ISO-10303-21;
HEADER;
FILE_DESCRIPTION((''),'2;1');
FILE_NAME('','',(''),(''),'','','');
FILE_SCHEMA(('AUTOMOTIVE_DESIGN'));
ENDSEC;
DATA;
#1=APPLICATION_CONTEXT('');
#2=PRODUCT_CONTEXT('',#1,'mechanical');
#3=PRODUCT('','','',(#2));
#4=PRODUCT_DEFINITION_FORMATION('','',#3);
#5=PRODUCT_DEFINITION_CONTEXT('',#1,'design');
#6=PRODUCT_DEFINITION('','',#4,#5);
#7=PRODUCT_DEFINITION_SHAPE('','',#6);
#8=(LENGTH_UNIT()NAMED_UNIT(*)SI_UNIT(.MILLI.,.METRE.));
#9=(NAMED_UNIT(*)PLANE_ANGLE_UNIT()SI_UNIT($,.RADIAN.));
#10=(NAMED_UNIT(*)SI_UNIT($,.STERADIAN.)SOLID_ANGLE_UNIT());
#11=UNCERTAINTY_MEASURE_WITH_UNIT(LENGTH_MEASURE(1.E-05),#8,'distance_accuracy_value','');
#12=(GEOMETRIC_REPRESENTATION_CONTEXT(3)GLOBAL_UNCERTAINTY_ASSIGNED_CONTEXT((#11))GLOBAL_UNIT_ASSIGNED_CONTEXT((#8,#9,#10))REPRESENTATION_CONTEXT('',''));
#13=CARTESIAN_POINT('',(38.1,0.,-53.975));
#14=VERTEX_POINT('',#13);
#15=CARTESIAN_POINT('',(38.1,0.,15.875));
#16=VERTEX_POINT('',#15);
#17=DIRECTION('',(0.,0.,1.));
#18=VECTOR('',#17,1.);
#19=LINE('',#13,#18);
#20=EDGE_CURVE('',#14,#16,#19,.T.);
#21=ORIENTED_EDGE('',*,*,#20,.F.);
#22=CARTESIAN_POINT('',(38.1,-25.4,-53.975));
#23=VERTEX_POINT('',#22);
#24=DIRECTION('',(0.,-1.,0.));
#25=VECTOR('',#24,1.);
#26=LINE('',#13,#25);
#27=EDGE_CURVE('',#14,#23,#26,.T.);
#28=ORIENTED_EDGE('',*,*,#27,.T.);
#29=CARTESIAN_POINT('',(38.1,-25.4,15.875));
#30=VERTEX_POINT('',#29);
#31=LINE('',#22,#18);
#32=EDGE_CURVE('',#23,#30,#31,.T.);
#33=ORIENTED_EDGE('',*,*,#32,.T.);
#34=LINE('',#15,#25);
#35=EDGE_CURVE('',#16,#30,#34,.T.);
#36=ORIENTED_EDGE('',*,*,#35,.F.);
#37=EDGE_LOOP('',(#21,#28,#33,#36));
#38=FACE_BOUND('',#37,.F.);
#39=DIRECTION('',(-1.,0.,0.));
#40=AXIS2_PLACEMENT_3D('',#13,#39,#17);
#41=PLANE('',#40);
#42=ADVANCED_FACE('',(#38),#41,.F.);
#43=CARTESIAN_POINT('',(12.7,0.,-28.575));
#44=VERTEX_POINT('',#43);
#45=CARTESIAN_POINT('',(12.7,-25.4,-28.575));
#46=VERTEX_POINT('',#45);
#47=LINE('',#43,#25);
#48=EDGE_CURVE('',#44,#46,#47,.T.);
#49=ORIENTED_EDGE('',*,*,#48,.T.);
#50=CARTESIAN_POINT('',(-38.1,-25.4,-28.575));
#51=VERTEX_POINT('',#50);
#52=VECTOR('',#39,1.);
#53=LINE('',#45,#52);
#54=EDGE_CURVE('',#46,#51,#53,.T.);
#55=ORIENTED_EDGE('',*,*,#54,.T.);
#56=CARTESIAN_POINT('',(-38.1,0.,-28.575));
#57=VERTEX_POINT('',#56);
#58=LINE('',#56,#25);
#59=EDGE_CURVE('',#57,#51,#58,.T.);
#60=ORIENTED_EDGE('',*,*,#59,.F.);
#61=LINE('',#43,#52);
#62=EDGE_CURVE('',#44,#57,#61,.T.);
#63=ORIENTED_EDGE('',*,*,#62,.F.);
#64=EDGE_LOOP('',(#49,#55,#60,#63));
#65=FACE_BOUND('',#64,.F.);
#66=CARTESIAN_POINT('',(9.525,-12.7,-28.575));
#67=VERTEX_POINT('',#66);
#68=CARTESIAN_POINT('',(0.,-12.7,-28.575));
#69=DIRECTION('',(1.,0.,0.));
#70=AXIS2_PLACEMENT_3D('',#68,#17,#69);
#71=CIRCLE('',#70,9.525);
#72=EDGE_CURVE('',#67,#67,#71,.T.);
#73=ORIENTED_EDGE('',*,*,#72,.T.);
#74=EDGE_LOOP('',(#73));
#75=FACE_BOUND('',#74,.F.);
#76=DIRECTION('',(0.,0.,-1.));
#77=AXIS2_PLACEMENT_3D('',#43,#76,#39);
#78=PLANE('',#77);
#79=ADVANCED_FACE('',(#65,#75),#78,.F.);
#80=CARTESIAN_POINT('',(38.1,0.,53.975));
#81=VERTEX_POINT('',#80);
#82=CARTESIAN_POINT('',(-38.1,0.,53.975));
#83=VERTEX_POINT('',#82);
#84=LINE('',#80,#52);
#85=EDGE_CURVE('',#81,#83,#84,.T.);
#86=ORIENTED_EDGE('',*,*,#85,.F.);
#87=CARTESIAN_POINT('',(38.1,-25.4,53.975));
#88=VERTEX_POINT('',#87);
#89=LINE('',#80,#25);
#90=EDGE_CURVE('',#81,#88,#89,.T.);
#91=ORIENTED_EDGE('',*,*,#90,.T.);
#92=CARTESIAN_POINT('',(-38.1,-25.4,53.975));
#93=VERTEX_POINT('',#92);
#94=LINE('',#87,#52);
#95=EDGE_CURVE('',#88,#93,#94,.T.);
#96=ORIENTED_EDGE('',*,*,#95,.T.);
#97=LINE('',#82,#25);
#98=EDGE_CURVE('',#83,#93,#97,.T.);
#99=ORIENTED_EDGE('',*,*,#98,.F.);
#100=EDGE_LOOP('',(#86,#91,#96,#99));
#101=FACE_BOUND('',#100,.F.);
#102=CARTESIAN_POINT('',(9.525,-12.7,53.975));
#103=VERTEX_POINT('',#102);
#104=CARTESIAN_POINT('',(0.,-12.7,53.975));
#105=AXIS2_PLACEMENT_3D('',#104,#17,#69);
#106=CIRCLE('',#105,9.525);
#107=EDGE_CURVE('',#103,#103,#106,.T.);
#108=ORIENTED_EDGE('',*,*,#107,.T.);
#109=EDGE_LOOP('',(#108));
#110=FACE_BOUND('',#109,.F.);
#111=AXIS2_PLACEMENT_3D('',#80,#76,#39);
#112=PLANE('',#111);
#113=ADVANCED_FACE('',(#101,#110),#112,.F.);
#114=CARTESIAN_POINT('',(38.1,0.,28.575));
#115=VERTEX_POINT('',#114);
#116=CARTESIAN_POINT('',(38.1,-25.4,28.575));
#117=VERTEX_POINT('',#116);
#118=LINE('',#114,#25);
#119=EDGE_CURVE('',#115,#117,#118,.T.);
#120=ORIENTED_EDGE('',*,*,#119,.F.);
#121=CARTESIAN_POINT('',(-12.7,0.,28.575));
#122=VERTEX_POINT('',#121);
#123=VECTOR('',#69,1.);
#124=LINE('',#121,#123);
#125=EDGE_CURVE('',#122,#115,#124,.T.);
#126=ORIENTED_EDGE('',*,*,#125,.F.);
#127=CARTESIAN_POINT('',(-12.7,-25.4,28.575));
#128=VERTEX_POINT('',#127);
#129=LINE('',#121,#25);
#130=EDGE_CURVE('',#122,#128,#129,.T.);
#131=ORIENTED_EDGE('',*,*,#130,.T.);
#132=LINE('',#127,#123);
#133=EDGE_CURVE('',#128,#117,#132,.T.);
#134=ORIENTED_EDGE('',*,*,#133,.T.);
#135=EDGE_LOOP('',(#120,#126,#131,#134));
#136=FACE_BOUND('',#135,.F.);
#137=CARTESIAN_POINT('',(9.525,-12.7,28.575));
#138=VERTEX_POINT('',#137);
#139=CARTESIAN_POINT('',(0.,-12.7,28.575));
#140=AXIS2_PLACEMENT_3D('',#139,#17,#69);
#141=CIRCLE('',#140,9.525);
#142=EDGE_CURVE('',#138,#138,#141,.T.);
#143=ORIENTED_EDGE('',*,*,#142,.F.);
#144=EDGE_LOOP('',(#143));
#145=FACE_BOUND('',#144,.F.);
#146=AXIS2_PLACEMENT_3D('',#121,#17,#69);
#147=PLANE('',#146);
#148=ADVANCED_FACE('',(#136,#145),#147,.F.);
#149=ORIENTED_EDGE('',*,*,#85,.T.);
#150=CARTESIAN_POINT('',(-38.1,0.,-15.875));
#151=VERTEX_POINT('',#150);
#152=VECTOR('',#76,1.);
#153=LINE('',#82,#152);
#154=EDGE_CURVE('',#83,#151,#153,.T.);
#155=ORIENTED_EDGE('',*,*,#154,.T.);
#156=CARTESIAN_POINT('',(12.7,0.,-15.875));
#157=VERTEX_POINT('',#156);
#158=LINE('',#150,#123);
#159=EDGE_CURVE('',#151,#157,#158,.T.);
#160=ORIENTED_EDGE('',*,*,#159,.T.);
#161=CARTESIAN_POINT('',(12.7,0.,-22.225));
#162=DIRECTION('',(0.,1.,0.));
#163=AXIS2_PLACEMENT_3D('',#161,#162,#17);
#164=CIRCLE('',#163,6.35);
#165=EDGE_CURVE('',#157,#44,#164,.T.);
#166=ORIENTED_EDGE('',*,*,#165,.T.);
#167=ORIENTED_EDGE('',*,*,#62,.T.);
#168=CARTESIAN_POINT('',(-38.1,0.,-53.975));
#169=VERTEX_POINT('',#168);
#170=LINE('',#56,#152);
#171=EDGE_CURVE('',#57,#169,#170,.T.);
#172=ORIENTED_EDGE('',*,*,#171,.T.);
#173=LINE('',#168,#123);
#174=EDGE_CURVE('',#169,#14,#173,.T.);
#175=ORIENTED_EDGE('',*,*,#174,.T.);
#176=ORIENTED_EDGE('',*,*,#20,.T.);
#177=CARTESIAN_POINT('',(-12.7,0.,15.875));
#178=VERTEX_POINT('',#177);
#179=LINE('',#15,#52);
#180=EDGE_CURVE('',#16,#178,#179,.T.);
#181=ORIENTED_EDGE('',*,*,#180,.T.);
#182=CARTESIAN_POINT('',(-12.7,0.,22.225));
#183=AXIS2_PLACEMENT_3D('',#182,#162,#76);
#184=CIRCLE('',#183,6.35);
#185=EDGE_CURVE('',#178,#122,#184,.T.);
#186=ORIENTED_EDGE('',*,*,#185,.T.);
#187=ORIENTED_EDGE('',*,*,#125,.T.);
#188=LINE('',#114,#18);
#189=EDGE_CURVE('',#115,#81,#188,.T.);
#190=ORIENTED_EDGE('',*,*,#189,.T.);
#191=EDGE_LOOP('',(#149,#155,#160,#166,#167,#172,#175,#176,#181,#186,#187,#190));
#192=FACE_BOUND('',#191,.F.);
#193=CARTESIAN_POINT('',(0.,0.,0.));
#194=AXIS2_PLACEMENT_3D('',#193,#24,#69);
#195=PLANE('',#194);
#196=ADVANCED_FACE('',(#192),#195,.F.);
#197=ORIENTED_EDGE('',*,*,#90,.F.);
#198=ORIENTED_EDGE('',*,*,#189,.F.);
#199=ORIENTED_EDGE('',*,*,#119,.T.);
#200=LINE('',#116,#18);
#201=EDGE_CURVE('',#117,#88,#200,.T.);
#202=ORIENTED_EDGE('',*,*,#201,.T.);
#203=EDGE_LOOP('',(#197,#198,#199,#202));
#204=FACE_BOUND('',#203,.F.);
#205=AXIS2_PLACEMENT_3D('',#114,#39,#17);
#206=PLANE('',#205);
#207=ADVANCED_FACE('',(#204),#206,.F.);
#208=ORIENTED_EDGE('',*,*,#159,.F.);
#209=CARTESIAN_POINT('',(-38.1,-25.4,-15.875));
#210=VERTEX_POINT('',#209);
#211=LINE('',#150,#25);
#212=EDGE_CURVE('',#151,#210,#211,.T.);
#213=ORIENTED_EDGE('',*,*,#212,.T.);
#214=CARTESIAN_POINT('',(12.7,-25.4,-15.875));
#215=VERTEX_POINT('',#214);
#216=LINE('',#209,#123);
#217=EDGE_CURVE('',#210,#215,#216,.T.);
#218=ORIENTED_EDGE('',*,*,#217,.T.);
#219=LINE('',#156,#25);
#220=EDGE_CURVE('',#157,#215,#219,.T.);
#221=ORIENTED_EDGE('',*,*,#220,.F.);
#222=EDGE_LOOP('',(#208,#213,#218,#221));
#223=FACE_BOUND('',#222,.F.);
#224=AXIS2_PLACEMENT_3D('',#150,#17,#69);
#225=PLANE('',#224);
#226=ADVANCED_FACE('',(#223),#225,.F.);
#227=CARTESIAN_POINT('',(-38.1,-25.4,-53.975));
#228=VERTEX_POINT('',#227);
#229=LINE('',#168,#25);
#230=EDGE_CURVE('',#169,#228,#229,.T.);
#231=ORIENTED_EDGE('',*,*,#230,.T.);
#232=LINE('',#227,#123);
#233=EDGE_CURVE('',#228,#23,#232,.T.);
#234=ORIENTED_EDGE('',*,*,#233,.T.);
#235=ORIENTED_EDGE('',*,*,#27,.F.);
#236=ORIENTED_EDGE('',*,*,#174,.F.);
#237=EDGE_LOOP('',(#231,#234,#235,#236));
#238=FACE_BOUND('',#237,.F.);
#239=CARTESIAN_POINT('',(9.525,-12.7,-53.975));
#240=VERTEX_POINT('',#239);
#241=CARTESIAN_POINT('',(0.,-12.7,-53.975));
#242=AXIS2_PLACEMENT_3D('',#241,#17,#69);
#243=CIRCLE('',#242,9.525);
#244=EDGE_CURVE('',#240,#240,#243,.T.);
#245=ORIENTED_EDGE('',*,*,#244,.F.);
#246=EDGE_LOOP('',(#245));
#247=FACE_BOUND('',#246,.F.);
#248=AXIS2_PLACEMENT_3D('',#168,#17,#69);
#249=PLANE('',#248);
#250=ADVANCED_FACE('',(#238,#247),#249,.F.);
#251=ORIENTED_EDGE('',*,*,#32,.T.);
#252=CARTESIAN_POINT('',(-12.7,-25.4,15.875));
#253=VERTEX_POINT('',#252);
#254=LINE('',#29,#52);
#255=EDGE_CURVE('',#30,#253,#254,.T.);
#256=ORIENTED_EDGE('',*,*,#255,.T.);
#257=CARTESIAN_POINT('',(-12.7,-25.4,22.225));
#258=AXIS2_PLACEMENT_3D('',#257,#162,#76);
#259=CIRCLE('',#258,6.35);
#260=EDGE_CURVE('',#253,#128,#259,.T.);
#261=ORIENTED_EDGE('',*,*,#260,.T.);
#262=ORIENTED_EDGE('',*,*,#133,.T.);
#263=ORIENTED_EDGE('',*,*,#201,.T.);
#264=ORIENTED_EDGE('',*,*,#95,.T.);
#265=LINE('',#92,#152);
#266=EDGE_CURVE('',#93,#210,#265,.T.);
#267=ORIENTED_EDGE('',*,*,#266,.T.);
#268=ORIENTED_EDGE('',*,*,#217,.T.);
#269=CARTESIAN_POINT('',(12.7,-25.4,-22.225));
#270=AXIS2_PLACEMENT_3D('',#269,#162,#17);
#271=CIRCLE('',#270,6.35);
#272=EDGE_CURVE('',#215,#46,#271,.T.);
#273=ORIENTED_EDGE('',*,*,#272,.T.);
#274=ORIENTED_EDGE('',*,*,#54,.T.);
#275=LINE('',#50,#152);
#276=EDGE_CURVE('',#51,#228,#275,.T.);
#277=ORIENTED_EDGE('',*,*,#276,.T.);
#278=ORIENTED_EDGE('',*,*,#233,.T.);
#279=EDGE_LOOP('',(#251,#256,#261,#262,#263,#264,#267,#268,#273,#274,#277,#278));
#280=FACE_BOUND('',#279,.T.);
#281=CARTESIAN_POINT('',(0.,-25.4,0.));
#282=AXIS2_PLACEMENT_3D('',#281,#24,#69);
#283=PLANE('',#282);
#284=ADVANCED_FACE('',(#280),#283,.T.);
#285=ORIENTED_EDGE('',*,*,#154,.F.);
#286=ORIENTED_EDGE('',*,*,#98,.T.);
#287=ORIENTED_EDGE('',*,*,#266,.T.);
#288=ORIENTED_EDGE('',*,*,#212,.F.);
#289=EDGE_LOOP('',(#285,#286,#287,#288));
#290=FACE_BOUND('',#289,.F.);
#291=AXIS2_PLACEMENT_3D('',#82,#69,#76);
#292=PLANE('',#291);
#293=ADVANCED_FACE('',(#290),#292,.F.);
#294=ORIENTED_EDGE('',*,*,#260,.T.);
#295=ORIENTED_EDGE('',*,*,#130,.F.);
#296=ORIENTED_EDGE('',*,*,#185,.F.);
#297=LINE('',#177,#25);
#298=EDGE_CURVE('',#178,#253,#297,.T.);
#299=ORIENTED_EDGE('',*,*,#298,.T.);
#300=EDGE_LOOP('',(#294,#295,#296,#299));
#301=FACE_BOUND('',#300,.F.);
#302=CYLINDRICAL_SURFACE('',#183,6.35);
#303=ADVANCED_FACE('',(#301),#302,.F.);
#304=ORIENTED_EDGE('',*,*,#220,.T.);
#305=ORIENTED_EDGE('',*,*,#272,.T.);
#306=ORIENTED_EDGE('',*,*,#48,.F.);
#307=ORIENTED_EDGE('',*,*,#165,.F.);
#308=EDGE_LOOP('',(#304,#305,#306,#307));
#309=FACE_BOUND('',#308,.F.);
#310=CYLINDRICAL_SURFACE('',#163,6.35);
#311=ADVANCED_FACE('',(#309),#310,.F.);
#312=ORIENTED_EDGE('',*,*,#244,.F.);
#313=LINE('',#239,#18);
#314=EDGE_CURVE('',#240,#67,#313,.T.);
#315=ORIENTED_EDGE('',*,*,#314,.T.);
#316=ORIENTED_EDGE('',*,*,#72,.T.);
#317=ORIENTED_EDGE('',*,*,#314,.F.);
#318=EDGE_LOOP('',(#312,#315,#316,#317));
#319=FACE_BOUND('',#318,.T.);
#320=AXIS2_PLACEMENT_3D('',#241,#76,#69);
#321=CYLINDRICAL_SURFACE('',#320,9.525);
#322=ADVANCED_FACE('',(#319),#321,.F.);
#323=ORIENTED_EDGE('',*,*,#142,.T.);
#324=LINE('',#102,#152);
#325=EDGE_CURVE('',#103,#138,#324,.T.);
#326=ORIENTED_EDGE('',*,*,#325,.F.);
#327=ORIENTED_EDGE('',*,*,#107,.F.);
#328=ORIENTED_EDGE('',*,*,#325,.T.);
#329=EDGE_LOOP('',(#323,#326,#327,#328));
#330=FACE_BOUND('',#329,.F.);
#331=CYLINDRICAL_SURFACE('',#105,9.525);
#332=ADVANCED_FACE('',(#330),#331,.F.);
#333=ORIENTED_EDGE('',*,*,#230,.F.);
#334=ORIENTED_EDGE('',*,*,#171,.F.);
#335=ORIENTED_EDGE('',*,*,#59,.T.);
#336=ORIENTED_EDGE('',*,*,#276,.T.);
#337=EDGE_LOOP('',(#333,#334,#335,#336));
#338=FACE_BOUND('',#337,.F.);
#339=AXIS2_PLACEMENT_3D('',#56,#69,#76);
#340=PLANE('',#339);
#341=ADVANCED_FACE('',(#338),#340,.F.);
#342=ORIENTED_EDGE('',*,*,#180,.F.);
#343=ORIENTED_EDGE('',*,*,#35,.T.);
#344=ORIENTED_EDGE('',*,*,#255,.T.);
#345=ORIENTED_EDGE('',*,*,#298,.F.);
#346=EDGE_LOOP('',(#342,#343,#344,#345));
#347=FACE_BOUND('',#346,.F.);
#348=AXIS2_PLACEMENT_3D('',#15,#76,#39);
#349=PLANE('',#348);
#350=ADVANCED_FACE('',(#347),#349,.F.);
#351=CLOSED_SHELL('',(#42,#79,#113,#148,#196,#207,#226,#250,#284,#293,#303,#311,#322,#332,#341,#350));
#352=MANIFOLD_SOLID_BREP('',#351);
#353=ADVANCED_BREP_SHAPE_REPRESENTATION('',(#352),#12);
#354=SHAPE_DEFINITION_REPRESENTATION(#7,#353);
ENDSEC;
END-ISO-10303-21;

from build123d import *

# Parameters (mm, degrees)
F1_DEPTH = 25.4
F2_R     = 9.525
F3_DEPTH = 25.4


# Not quite as in the source:
# - a pattern or mirror of a feature is missing from the dataset's text; its kind, count and spacing are read off the source's solid


with BuildPart() as f1:
    # F0 (on Front) → F1 (new body)
    with BuildSketch(Plane.XZ):
        with BuildLine():
            Line((38.1, 53.975), (-38.1, 53.975))
            Line((-38.1, 53.975), (-38.1, -15.875))
            Line((-38.1, -15.875), (12.7, -15.875))
            ThreePointArc((12.7, -15.875), (19.05, -22.225), (12.7, -28.575))
            Line((12.7, -28.575), (-38.1, -28.575))
            Line((-38.1, -28.575), (-38.1, -53.975))
            Line((-38.1, -53.975), (38.1, -53.975))
            Line((38.1, -53.975), (38.1, 15.875))
            Line((38.1, 15.875), (-12.7, 15.875))
            ThreePointArc((-12.7, 15.875), (-19.05, 22.225), (-12.7, 28.575))
            Line((-12.7, 28.575), (38.1, 28.575))
            Line((38.1, 28.575), (38.1, 53.975))
        make_face()
    extrude(amount=F1_DEPTH)

    # F2 (on face) → F3 (cut, through all)
    with BuildSketch(Plane.XY.offset(53.975)):
        with Locations((0, -12.7)):
            Circle(F2_R)
    f3 = extrude(amount=-F3_DEPTH, mode=Mode.SUBTRACT)

    # F3_copies: F3 across plane
    add(f3.mirror(Plane(origin=(0, 0, 0), x_dir=(-1, 0, 0), z_dir=(0, 0, -1))), mode=Mode.SUBTRACT)


solid = f1.part
